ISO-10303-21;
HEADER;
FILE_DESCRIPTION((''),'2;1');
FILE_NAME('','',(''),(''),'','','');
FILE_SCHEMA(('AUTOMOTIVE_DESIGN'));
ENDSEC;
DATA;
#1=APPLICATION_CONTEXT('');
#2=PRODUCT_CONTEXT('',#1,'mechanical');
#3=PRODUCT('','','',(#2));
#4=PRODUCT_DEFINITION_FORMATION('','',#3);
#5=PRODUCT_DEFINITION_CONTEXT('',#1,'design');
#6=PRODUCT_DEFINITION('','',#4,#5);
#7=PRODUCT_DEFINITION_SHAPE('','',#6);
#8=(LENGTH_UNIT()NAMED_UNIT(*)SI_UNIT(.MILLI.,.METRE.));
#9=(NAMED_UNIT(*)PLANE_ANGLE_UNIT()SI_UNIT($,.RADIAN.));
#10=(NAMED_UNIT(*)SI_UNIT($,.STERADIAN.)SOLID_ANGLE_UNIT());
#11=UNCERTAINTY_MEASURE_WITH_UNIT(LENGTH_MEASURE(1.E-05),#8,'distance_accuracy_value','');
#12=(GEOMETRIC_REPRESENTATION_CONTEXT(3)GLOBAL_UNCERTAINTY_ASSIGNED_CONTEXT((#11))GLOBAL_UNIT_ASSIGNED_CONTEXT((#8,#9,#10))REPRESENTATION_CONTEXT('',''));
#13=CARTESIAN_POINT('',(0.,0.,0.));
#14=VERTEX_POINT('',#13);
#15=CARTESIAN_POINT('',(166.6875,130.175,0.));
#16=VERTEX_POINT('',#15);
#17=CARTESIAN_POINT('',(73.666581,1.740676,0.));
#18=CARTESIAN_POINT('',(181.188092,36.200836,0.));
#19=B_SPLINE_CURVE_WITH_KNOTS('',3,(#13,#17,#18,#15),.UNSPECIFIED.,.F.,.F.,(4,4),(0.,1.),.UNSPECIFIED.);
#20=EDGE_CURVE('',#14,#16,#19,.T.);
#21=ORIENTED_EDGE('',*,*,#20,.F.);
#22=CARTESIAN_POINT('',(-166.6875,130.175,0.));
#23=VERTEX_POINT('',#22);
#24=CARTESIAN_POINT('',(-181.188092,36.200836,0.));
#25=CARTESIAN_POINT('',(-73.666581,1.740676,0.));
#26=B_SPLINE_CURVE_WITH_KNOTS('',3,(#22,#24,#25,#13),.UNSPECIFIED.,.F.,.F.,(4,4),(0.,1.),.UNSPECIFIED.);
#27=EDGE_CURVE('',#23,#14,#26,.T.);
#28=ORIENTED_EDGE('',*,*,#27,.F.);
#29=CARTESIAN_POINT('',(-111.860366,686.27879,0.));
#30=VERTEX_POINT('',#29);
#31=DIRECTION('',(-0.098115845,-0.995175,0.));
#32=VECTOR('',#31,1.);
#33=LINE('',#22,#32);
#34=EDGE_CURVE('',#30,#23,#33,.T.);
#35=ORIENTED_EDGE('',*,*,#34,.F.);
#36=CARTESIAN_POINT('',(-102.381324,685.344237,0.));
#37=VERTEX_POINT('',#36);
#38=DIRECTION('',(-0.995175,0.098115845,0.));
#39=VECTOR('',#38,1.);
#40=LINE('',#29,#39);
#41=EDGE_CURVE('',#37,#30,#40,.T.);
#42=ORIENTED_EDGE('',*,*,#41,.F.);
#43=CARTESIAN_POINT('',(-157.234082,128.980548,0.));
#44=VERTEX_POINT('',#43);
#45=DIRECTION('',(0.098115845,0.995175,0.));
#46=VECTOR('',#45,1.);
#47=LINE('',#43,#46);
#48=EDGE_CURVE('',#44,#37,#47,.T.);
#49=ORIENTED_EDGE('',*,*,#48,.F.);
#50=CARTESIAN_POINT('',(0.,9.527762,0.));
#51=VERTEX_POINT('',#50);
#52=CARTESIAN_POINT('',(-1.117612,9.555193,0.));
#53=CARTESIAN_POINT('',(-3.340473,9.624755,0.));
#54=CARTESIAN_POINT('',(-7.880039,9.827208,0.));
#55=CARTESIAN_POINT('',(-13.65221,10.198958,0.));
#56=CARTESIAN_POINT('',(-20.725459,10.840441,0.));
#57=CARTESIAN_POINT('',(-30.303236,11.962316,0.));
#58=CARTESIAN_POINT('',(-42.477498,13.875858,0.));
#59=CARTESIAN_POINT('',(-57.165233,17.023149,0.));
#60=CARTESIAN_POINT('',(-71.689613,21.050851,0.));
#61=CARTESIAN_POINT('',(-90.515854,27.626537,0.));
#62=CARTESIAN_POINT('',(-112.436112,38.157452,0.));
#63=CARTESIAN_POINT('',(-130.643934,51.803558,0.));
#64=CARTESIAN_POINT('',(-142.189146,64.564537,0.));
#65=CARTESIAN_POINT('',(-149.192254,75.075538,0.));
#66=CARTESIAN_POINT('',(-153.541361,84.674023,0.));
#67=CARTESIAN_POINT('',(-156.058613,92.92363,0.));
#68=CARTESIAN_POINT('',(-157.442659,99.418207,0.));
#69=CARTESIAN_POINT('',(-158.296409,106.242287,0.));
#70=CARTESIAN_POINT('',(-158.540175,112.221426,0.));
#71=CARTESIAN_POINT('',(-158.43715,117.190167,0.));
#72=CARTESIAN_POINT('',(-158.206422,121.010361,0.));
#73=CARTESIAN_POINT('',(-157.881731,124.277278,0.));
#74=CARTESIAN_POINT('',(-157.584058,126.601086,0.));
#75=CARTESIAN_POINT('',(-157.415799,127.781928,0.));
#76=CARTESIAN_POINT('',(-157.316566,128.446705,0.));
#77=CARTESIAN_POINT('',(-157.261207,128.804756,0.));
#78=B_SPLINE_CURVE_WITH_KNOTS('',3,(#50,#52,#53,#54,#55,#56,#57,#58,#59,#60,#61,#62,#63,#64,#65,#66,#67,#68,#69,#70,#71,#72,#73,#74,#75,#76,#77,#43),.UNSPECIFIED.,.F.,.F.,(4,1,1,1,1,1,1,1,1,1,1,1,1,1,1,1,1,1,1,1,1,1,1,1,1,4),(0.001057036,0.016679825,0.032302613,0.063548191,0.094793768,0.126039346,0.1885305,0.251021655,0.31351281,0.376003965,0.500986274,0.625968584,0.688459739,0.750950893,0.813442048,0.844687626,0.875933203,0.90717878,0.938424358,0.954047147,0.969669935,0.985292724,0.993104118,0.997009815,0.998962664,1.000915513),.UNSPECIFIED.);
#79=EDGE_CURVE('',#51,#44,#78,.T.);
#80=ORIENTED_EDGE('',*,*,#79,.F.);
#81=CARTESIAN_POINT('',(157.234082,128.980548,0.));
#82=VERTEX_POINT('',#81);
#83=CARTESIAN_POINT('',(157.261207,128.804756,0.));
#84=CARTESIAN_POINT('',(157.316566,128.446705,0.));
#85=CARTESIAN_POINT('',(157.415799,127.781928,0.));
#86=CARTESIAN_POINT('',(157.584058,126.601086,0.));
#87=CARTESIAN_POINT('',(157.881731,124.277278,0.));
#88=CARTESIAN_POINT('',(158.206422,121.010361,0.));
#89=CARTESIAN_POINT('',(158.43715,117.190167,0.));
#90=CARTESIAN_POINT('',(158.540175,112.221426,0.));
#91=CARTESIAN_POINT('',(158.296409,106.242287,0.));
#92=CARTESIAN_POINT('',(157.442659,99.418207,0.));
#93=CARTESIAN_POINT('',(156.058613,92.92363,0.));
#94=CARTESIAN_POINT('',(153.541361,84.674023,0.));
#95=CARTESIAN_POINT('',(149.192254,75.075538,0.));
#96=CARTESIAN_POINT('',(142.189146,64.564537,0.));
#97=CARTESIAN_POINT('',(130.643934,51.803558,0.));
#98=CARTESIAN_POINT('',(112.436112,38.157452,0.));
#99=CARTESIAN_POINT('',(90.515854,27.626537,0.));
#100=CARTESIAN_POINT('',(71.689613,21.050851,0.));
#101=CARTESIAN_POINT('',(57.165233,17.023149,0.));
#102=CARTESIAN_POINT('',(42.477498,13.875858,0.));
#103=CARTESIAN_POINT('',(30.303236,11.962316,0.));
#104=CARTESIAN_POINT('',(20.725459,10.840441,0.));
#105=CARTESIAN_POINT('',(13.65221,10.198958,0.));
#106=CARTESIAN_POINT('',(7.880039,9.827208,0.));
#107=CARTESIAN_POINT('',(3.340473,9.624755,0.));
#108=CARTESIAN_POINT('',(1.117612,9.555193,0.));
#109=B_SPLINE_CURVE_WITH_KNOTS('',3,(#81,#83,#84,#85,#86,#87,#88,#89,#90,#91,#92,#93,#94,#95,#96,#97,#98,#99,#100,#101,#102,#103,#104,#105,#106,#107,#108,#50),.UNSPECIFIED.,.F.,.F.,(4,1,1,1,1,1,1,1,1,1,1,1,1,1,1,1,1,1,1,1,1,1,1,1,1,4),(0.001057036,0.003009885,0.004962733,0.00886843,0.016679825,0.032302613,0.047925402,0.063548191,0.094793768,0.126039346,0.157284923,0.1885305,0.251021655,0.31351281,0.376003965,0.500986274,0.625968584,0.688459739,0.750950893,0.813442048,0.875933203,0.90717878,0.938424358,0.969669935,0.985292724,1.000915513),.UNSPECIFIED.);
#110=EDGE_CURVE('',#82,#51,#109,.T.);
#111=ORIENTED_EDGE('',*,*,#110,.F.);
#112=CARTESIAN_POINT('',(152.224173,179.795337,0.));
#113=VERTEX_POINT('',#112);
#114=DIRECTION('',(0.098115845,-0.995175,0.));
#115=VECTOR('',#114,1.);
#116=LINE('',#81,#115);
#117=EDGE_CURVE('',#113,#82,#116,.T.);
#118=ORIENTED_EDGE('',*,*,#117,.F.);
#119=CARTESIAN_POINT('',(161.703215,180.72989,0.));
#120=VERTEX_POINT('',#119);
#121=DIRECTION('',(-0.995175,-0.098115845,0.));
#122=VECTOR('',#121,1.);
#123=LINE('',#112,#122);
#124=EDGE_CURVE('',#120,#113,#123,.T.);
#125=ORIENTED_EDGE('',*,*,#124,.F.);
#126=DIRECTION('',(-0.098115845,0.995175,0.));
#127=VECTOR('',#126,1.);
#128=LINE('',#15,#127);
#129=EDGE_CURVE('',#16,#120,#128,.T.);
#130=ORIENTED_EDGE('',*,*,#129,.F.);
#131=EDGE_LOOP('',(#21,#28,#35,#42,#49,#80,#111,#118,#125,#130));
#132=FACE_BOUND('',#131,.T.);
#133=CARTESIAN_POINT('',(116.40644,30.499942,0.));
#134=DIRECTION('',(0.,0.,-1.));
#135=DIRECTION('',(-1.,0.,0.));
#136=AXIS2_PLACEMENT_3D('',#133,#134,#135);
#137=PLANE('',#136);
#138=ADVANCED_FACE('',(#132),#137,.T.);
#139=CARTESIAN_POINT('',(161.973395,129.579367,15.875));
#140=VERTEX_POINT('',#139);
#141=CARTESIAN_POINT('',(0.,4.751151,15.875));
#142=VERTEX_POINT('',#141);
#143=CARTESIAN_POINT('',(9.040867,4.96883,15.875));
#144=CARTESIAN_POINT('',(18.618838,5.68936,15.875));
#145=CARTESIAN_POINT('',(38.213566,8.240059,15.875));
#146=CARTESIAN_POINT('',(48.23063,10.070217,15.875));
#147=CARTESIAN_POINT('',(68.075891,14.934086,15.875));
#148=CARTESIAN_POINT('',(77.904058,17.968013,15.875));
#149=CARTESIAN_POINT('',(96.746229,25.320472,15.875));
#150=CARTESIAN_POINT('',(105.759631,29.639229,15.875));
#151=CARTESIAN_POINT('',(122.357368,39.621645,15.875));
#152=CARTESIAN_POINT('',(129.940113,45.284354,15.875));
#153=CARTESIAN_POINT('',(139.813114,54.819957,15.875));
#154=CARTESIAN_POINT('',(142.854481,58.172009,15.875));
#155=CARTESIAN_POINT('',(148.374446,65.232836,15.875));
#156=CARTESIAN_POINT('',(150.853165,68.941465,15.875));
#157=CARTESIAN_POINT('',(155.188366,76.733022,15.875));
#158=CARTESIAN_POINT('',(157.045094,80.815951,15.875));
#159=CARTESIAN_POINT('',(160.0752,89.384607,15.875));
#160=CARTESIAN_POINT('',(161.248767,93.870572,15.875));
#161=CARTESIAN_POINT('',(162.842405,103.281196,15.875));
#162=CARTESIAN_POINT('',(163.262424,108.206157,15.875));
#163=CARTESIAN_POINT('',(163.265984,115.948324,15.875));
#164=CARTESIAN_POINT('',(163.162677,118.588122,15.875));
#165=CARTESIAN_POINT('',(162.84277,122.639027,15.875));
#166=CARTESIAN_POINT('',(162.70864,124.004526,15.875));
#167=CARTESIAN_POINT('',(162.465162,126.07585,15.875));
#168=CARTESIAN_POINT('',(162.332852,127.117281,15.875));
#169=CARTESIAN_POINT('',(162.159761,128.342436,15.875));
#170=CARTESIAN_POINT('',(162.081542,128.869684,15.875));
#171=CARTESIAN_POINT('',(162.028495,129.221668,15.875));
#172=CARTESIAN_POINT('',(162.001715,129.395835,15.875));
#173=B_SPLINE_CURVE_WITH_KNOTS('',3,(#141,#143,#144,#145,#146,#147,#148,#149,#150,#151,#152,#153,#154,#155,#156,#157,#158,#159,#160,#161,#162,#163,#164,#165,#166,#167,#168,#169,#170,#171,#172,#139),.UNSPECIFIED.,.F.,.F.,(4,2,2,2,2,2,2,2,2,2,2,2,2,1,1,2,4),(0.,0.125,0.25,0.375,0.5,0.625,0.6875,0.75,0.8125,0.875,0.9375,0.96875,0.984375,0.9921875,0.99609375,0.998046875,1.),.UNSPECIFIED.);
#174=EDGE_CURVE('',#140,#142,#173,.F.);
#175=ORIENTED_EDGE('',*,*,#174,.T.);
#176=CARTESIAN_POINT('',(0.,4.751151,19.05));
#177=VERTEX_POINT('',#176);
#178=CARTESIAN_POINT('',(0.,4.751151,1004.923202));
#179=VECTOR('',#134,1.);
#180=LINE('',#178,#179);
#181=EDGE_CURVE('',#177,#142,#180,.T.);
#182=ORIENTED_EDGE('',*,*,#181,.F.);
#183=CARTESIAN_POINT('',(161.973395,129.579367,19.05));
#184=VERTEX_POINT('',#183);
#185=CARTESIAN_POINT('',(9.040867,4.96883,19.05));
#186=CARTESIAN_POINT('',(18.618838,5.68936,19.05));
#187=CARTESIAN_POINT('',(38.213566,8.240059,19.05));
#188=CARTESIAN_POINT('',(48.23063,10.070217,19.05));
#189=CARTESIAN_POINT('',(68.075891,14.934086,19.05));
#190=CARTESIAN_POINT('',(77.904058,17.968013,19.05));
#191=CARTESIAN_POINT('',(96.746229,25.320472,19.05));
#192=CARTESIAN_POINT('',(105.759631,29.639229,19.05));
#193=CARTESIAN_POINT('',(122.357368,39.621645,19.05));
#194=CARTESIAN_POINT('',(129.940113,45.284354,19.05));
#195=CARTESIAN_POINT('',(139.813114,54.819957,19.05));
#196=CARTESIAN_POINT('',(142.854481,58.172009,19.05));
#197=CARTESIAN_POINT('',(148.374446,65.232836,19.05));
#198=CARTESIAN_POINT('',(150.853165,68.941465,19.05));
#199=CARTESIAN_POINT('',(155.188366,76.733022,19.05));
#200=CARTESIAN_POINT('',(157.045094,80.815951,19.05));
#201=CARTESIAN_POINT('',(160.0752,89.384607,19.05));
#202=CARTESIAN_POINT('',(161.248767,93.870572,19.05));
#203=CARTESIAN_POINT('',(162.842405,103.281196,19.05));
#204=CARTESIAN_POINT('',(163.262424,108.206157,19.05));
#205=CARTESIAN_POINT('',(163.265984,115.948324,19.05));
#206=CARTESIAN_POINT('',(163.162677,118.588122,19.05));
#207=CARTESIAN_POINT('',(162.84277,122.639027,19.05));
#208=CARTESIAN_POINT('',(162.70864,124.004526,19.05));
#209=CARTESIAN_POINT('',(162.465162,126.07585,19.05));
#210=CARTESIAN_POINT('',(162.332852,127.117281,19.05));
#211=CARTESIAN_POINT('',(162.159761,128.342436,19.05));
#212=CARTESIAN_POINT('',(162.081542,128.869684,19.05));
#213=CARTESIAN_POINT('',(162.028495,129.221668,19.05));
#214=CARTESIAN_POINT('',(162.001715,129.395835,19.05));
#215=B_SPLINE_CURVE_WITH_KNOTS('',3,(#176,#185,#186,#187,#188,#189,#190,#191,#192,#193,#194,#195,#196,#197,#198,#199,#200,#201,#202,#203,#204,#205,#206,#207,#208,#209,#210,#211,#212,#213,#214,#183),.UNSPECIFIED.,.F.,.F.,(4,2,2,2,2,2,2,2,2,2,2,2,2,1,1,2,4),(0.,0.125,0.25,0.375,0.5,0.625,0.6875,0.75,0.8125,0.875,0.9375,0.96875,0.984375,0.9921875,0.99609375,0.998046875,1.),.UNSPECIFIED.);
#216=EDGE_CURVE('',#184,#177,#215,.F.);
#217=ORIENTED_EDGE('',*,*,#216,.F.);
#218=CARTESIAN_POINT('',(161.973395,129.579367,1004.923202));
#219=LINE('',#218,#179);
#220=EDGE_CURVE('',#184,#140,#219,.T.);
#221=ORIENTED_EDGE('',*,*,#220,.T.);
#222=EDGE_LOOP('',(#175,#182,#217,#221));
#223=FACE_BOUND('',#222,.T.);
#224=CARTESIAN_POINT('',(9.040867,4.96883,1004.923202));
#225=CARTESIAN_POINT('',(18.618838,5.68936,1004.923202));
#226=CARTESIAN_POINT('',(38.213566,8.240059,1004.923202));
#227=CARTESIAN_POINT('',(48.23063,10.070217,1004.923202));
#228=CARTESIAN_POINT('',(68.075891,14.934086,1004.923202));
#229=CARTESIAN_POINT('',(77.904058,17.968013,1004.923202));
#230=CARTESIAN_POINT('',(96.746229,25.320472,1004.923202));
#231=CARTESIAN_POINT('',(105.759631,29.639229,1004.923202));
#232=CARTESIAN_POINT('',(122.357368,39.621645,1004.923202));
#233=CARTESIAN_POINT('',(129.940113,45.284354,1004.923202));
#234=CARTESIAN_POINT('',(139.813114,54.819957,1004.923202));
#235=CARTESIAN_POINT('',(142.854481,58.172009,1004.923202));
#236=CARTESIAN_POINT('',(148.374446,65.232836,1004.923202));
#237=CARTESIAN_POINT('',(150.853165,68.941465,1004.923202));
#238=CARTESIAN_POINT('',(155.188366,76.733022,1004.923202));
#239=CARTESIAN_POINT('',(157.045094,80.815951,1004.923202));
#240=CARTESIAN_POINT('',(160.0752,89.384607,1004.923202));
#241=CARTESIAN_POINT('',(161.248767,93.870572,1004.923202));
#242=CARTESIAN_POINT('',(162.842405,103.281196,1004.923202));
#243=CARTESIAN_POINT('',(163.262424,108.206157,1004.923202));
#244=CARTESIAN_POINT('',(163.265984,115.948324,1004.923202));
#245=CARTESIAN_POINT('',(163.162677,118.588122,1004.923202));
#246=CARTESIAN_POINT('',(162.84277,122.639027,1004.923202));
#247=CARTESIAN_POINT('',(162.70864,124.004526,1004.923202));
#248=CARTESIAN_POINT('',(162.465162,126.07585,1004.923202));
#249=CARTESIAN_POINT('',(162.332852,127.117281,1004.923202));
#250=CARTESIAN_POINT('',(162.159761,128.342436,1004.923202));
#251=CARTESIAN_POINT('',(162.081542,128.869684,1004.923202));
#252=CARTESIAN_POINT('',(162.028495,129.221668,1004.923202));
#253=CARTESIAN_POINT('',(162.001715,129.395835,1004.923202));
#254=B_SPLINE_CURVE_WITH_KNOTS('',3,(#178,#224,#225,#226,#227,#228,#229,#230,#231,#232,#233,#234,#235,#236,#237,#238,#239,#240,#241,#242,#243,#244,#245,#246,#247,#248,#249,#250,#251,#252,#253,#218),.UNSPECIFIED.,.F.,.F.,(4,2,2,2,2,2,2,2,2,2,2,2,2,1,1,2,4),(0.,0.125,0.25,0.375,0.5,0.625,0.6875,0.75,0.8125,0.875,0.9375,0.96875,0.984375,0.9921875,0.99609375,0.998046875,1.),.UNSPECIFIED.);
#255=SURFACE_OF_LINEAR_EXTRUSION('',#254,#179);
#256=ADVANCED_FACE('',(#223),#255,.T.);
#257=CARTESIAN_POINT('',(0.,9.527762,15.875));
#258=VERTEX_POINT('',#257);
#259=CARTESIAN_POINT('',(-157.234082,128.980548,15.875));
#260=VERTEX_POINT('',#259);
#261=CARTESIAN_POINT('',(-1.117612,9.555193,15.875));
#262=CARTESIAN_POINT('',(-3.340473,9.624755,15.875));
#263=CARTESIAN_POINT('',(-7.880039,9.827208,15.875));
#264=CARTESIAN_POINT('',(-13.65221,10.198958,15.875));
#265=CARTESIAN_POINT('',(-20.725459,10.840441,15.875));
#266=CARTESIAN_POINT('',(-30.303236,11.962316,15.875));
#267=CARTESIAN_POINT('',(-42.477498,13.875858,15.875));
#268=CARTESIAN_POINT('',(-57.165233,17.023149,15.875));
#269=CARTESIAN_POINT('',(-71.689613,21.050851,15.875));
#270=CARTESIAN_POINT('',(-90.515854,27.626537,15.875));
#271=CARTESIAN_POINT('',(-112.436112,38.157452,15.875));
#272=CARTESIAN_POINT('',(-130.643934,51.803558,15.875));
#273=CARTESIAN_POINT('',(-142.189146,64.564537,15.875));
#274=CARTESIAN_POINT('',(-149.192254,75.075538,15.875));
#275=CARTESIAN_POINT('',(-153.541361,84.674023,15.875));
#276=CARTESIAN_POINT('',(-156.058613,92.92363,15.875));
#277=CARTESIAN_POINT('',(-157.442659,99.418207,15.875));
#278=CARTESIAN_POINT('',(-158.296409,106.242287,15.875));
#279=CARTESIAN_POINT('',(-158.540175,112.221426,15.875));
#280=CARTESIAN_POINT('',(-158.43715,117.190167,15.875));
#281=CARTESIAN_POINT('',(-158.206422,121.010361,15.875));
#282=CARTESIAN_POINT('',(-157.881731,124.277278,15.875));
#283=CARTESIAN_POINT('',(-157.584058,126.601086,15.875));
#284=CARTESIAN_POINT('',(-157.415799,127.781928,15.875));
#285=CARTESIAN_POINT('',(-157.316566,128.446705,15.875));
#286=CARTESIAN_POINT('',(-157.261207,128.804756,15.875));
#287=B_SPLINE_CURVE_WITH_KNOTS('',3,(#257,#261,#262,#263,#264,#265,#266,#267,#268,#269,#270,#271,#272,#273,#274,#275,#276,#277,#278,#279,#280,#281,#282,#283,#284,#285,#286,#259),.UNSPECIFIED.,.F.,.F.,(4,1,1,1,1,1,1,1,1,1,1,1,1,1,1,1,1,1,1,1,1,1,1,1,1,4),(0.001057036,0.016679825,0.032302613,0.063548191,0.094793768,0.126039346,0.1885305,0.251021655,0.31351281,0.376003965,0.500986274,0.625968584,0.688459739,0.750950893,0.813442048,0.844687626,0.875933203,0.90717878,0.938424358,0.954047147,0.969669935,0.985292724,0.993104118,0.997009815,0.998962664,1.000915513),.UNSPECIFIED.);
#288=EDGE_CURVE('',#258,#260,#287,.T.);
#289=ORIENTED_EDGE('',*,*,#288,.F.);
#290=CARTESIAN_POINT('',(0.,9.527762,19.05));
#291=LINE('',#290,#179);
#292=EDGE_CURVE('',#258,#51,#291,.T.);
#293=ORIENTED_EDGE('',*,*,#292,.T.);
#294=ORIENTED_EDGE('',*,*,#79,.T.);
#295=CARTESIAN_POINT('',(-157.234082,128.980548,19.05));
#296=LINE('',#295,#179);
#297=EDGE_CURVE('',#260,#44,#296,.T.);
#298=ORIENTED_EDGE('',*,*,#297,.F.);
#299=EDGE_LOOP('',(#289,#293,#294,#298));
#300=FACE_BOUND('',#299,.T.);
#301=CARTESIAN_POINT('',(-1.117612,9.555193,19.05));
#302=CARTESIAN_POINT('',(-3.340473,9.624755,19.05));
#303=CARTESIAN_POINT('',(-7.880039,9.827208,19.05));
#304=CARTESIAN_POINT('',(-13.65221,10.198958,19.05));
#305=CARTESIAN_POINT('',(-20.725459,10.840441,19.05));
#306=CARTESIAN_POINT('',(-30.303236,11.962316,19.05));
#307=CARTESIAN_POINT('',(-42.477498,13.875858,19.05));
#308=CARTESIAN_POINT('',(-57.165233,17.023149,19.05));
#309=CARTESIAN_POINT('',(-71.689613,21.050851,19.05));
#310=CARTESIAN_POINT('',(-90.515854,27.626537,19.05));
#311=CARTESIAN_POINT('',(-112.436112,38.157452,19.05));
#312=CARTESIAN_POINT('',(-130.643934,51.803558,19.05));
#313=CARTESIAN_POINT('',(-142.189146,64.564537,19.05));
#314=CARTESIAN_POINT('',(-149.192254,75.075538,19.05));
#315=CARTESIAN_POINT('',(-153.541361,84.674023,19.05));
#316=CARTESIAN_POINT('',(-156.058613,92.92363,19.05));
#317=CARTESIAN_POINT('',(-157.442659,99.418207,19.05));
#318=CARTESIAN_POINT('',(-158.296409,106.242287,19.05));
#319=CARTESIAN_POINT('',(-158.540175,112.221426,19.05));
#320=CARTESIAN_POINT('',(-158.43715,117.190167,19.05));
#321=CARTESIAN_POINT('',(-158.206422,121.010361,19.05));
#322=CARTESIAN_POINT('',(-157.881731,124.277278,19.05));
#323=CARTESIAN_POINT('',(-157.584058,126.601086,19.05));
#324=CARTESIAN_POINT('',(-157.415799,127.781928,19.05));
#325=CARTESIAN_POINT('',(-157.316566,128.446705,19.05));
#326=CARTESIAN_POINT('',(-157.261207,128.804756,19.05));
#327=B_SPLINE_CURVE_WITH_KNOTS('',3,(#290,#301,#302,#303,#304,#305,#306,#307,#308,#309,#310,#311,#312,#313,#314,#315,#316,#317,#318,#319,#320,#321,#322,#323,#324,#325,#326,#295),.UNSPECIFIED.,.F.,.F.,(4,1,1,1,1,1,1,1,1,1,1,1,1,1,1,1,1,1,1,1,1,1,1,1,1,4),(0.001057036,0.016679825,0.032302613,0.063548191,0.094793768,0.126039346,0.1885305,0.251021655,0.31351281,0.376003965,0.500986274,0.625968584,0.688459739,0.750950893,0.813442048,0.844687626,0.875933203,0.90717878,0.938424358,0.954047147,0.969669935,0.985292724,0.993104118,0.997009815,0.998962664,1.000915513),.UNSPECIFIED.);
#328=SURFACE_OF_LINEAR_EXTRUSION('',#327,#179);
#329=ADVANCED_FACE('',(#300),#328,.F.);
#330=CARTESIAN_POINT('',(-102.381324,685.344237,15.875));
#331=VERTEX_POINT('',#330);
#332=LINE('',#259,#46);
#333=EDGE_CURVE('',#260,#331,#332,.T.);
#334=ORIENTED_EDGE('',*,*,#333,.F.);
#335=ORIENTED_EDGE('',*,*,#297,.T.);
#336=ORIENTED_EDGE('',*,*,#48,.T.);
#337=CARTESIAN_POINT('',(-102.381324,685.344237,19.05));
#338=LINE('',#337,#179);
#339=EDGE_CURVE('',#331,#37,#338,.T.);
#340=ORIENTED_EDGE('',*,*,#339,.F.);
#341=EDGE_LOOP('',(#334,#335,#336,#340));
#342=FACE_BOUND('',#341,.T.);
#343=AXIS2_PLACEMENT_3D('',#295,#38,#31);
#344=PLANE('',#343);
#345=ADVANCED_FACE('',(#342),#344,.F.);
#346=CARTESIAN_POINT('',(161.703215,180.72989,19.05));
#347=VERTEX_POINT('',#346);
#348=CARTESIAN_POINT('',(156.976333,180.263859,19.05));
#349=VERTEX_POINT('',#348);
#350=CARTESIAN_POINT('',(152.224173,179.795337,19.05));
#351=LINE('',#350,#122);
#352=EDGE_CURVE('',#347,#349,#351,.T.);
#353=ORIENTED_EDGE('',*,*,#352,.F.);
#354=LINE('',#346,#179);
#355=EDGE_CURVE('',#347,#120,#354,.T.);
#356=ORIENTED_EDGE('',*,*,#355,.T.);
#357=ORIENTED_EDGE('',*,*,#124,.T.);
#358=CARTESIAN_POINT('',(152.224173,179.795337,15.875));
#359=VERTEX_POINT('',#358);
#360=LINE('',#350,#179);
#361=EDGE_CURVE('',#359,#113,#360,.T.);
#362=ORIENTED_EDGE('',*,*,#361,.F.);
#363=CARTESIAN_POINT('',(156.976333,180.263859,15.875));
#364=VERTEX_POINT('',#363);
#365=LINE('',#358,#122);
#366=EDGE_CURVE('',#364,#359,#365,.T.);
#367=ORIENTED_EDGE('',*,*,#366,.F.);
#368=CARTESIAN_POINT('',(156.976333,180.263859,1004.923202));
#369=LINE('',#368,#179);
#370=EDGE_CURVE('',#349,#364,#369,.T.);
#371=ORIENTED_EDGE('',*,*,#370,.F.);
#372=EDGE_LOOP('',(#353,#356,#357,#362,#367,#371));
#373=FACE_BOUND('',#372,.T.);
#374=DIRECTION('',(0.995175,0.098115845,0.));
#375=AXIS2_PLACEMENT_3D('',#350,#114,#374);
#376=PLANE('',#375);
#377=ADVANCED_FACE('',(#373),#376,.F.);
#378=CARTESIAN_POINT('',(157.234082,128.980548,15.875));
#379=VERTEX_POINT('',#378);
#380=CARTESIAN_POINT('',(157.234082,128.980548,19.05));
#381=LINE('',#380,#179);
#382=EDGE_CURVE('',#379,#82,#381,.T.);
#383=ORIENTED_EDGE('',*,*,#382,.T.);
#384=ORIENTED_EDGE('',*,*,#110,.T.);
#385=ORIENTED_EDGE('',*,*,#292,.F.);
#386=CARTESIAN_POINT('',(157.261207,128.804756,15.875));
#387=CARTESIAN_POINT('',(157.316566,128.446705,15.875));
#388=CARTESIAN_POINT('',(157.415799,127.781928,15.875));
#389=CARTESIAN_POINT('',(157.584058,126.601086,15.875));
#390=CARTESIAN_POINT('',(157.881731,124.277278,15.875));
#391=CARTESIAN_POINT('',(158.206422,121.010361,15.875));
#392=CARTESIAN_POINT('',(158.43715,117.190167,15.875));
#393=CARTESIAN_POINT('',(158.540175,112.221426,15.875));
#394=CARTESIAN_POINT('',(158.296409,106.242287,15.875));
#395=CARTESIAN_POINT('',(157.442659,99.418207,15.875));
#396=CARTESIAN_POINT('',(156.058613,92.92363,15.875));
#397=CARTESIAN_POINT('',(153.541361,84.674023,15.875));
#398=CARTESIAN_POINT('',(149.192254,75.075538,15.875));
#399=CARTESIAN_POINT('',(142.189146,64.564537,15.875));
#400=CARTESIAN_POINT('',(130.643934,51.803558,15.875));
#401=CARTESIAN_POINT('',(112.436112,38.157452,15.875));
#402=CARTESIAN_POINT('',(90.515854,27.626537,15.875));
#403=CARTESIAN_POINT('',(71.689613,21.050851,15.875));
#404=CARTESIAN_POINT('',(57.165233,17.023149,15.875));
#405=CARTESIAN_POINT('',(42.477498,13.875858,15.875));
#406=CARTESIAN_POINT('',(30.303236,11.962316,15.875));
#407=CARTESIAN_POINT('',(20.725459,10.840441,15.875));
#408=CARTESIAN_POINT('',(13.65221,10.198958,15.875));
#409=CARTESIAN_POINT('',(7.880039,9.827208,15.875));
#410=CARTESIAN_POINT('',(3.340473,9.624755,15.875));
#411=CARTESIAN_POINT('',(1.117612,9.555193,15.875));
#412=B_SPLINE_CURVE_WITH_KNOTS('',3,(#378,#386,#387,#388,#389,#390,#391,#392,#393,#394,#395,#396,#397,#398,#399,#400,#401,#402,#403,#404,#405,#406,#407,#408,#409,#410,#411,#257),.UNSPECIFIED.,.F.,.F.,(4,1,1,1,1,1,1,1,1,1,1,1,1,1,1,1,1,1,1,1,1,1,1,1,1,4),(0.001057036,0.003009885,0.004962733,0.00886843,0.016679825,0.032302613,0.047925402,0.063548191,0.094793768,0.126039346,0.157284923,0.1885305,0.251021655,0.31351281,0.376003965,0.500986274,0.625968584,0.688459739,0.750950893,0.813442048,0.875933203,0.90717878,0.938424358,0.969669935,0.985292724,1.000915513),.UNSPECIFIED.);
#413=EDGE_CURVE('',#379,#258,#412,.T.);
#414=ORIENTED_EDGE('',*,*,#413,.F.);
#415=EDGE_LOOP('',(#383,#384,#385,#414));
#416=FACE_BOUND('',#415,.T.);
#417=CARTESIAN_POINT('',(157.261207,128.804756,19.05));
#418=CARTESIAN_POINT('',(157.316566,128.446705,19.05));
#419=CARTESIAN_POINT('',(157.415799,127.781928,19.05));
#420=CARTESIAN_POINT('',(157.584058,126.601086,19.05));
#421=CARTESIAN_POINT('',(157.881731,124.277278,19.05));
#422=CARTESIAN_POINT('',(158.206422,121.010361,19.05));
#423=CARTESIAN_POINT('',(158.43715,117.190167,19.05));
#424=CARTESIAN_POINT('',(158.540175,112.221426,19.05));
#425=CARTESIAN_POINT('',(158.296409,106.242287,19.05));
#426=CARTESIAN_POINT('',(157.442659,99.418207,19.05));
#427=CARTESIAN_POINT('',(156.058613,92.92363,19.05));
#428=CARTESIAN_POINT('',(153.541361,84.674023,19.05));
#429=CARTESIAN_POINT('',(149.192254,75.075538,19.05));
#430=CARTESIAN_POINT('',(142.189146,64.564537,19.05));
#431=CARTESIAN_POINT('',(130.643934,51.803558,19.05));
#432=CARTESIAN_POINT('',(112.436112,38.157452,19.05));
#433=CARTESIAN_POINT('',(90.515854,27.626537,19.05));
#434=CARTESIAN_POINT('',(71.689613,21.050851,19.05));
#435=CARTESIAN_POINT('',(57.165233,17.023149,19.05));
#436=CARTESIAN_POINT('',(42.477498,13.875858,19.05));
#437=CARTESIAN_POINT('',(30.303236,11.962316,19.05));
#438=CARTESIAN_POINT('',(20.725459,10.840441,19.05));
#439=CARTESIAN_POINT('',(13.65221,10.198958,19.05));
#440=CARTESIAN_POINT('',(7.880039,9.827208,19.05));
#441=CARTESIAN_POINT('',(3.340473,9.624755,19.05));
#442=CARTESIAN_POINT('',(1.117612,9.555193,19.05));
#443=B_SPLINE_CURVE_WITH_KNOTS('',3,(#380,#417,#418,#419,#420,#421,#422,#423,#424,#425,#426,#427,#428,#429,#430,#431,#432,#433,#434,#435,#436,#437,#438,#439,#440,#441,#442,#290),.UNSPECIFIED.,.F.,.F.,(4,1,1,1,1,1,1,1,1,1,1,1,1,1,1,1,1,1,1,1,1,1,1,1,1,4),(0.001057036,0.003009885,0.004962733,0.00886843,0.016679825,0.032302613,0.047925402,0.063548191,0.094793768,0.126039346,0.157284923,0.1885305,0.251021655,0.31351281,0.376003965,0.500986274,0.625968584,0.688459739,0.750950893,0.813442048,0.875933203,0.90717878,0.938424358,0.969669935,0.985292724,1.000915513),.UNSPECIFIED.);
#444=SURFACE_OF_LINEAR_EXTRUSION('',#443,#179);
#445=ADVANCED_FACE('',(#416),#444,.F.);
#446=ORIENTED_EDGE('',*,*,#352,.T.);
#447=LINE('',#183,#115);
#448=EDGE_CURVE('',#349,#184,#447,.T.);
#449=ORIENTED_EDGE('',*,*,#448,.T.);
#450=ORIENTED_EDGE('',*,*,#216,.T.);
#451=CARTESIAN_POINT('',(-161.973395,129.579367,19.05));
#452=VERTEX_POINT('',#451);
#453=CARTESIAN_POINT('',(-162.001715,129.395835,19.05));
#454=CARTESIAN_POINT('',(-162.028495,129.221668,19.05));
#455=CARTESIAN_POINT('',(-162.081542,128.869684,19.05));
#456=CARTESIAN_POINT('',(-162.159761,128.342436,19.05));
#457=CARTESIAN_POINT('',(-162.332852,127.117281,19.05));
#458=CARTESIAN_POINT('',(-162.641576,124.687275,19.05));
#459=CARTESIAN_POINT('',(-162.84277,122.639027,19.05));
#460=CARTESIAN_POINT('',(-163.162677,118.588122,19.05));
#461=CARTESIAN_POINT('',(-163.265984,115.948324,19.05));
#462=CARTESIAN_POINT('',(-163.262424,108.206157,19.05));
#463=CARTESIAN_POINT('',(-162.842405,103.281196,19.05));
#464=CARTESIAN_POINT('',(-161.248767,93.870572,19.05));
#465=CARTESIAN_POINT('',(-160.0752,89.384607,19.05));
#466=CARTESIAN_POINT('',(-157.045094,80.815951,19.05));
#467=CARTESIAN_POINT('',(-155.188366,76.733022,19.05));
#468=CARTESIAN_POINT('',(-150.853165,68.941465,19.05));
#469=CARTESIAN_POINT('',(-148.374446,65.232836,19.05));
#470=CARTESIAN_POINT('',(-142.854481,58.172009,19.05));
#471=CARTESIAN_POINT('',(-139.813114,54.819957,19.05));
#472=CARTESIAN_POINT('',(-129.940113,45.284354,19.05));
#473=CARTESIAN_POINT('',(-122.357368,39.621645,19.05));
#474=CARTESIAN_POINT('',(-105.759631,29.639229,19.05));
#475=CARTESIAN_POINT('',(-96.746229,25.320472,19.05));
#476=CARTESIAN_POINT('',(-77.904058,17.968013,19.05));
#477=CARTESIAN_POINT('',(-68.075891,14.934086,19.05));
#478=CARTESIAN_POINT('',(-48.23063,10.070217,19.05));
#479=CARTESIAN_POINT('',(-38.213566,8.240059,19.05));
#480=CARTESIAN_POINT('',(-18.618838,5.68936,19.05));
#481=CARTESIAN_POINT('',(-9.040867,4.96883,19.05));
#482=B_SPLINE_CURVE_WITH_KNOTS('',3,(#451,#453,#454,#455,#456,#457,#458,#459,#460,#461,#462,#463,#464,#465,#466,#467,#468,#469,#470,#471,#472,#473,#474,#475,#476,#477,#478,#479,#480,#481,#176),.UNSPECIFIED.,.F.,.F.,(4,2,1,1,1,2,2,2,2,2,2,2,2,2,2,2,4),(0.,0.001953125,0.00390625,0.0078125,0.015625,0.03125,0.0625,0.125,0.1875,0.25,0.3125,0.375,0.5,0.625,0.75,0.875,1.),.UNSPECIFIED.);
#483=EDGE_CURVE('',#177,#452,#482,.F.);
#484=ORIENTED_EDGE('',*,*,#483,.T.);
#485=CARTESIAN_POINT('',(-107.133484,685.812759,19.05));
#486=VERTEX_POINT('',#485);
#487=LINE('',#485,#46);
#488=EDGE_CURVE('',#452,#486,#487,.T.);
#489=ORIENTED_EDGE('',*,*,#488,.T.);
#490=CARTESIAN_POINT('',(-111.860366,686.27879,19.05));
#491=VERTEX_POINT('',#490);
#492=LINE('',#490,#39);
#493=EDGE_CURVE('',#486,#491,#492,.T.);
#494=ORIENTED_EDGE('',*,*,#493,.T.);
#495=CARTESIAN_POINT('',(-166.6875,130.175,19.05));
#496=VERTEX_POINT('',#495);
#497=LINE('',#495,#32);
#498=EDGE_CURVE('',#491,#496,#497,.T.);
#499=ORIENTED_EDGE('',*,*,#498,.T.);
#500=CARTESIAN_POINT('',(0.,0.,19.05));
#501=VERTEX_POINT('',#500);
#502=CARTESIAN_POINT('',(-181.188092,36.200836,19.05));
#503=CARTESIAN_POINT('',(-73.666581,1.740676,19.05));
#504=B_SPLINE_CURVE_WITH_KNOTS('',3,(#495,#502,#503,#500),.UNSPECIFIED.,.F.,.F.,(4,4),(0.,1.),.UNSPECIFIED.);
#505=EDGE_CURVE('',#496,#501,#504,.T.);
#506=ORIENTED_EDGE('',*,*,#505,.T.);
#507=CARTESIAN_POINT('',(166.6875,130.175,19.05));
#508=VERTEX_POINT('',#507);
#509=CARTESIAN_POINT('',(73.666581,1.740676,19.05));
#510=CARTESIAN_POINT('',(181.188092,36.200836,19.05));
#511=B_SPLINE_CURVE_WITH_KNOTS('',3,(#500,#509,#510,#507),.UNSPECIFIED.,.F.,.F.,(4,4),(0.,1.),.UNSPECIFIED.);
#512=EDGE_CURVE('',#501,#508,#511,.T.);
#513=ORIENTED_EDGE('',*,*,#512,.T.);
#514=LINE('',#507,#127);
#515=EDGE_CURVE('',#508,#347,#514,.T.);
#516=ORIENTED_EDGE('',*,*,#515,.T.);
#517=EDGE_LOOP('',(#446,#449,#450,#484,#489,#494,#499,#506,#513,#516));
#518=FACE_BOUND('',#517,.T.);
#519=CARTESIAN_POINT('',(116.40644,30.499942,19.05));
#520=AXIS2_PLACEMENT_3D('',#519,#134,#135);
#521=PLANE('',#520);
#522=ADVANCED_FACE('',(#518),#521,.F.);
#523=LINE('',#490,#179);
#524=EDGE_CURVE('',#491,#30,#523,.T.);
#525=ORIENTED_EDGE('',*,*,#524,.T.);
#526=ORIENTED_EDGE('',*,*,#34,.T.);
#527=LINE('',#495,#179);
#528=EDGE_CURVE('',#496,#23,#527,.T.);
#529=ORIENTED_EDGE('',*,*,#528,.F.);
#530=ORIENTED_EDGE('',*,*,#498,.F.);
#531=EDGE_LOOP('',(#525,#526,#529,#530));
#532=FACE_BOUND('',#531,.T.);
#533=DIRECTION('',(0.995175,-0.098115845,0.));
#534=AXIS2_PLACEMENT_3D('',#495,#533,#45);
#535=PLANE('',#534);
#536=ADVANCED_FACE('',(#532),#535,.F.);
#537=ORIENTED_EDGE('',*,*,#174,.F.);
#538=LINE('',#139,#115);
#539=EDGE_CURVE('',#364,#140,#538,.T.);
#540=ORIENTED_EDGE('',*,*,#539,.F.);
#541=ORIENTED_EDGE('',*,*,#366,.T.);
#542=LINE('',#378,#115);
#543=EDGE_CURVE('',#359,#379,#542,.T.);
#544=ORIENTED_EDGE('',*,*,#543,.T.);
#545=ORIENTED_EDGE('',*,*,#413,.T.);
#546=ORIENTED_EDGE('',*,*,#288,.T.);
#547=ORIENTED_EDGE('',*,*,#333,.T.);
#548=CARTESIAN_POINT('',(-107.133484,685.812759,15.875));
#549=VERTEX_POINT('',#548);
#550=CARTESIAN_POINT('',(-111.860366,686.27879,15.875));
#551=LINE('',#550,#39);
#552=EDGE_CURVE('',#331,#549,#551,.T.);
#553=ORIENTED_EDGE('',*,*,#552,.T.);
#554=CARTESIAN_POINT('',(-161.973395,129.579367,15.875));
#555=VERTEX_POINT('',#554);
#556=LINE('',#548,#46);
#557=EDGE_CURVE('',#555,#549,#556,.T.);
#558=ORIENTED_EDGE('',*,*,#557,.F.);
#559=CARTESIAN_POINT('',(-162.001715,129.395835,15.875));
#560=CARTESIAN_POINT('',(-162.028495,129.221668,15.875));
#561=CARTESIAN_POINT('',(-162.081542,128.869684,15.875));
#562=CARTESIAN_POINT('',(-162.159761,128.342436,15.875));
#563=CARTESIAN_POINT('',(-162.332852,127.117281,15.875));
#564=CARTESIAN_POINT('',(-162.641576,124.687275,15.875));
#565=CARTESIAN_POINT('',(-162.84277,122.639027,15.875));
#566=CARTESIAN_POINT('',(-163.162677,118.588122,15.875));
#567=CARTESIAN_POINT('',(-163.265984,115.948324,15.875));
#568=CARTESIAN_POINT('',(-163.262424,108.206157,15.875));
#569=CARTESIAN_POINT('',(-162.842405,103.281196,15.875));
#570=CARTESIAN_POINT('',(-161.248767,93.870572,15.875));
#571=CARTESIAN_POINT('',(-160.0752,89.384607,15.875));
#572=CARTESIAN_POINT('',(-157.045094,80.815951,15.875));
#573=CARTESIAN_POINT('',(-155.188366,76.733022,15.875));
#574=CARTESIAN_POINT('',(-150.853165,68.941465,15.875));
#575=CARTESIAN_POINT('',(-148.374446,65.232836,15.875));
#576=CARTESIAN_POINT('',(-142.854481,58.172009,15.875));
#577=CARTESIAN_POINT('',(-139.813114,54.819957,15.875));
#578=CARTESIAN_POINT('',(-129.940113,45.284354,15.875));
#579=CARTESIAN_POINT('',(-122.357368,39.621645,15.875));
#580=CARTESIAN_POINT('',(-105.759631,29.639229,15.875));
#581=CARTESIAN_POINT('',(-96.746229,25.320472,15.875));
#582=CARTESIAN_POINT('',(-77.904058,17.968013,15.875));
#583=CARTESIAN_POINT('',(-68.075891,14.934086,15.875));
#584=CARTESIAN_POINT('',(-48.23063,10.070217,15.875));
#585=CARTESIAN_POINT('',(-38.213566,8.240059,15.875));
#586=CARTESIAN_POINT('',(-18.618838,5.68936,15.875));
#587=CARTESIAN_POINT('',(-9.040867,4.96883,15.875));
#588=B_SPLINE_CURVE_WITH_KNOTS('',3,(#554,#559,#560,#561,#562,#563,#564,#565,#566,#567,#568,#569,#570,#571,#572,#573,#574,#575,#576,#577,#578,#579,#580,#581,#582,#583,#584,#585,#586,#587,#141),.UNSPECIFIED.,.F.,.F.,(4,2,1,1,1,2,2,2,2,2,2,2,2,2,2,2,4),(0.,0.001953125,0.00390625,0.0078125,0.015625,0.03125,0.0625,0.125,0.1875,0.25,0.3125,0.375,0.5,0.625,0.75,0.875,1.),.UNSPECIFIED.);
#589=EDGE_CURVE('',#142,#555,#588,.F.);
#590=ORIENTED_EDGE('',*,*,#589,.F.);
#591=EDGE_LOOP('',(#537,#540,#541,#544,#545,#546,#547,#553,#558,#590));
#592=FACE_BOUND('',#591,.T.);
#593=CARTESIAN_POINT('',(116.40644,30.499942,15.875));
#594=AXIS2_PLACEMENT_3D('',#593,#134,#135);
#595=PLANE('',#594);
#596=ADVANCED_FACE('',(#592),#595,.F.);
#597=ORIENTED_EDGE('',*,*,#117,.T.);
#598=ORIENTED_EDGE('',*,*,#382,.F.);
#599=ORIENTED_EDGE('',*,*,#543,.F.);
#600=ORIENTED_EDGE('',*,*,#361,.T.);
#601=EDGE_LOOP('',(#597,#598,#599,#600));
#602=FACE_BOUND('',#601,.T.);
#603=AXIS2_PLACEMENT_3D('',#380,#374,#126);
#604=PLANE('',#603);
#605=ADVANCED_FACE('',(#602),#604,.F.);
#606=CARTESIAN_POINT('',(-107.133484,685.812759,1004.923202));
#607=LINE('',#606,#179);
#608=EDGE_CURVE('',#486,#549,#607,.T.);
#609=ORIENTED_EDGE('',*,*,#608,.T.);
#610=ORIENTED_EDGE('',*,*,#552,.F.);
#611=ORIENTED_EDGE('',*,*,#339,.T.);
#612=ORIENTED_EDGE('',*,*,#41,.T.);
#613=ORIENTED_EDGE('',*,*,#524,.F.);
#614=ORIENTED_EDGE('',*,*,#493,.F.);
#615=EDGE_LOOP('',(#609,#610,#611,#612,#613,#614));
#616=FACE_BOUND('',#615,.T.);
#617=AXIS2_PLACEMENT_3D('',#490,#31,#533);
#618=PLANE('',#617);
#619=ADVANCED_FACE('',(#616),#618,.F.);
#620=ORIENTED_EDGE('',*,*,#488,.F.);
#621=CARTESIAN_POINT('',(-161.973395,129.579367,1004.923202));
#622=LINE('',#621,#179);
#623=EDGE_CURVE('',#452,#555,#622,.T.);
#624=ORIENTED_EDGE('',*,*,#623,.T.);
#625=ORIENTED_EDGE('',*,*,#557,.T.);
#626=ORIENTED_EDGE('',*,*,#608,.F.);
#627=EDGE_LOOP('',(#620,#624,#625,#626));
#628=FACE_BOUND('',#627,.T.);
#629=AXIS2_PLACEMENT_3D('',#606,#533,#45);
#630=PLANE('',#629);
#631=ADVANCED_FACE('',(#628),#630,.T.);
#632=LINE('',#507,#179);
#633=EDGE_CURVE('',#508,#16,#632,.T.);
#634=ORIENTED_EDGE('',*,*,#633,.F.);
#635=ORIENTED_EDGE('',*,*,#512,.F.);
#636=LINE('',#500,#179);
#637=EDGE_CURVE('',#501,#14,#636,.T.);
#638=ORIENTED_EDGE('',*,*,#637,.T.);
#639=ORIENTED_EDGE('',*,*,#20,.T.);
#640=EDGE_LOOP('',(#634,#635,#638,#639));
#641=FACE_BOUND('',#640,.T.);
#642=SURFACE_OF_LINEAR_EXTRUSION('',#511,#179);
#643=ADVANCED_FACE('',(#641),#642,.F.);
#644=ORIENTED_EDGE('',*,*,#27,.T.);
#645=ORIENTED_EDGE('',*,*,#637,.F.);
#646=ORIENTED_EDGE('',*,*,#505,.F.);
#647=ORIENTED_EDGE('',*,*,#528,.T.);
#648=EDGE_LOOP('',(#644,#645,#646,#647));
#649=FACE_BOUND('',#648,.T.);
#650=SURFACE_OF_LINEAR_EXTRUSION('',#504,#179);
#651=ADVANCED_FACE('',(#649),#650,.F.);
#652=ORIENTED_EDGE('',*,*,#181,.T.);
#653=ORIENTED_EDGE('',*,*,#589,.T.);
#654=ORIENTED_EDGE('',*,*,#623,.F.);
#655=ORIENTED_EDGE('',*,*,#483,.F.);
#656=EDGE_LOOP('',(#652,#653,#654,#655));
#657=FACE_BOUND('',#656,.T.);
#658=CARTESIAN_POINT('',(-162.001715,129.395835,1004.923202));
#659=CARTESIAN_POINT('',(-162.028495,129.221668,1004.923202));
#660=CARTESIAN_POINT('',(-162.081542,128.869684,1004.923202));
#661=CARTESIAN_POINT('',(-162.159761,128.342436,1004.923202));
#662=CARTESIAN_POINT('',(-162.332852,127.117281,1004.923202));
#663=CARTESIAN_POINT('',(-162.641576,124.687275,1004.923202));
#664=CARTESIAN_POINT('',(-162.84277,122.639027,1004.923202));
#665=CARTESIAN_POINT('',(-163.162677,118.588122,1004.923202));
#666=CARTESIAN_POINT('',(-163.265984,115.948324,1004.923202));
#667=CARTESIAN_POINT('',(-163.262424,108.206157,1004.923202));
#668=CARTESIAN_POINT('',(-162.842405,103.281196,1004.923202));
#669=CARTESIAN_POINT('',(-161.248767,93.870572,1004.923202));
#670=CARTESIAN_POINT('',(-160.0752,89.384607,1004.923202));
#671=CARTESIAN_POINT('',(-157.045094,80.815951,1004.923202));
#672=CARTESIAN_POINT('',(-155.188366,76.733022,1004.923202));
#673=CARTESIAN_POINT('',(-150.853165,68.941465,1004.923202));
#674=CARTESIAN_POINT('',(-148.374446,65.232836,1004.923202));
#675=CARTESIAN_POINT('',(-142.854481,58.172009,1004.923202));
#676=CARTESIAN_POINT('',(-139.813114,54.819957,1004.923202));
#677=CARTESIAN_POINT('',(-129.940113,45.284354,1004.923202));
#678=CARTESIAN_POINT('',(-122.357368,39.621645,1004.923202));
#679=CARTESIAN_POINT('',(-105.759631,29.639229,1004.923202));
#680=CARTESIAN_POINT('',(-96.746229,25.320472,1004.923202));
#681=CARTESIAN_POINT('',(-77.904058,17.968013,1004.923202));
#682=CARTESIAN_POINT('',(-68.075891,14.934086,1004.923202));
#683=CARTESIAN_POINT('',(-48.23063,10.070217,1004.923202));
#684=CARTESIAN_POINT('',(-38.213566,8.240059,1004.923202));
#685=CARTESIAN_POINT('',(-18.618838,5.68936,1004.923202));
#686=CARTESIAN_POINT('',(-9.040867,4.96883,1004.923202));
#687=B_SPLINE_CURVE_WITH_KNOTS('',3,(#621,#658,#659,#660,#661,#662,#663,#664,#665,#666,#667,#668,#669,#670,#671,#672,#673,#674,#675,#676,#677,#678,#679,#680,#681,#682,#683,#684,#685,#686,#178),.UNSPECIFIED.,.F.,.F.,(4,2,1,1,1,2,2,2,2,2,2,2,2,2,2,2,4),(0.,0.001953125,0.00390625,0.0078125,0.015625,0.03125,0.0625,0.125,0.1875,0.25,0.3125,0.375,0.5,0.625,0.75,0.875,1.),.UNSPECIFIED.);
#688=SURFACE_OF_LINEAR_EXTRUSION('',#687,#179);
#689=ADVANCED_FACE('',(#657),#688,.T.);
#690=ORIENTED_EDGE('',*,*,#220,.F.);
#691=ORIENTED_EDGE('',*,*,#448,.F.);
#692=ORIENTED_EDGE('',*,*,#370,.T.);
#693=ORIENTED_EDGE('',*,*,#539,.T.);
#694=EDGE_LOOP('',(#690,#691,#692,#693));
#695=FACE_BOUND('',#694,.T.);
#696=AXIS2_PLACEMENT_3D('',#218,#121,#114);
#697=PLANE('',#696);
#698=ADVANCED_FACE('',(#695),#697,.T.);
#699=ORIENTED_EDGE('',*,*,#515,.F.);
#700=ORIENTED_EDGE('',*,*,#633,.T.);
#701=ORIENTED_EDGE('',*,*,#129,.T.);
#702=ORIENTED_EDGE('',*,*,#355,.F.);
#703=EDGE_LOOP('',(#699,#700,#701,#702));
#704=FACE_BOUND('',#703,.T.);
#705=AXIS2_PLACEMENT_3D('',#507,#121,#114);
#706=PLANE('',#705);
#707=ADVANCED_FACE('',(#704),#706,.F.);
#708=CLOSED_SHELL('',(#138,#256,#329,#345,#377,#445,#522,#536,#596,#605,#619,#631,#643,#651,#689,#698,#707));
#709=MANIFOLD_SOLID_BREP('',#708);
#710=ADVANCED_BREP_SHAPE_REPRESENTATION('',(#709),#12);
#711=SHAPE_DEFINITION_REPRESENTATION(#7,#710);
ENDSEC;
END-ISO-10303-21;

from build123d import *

# Parameters (mm, degrees)
BOSS_EXTRUDE1_DEPTH = 19.05
CUT_EXTRUDE1_START  = -3.175
CUT_EXTRUDE1_DEPTH  = 3.175


# Read off the part's stored shape, not the designer's step: Cut-Extrude1
with BuildPart() as part:
    # Sketch1 → Boss-Extrude1 (new body)
    with BuildSketch(Plane.XY):
        with BuildLine():
            Line((157.234081882, 128.980548454), (152.224173193, 179.795336584))
            Line((152.224173193, 179.795336584), (161.70321507, 180.729890008))
            Line((161.70321507, 180.729890008), (166.6875, 130.175))
            add(Edge.make_bspline(
                [(0, 0), (73.666580622, 1.740675992), (181.188092361, 36.200835609), (166.6875, 130.175)],
                knots=[0, 0, 0, 0, 1, 1, 1, 1], degree=3))
            add(Edge.make_bspline(
                [(0, 0), (-73.666580622, 1.740675992), (-181.188092361, 36.200835609), (-166.6875, 130.175)],
                knots=[0, 0, 0, 0, 1, 1, 1, 1], degree=3))
            Line((-166.6875, 130.175), (-111.860365766, 686.278790089))
            Line((-111.860365766, 686.278790089), (-102.381323889, 685.344236665))
            Line((-102.381323889, 685.344236665), (-157.234081882, 128.980548454))
            add(Edge.make_bspline(
                [(0, 9.52776174), (-1.117611602, 9.555193192), (-3.340472897, 9.624755056), (-7.880039481, 9.827207732), (-13.652210416, 10.198958437), (-20.725459036, 10.840441372), (-30.303235723, 11.962316267), (-42.47749757, 13.875858033), (-57.165232888, 17.02314898), (-71.689613059, 21.050850851), (-90.515854195, 27.626537064), (-112.436111514, 38.157452487), (-130.643933928, 51.803557723), (-142.189146149, 64.564536934), (-149.192253507, 75.075537554), (-153.541361304, 84.674022673), (-156.058613173, 92.923629982), (-157.442658539, 99.418206789), (-158.29640922, 106.242287005), (-158.540175044, 112.221426054), (-158.437150466, 117.190167219), (-158.20642164, 121.010360535), (-157.881730698, 124.277278241), (-157.584058118, 126.601085874), (-157.415798733, 127.781927866), (-157.316566229, 128.446705395), (-157.261207353, 128.804756083), (-157.234081882, 128.980548454)],
                knots=[0.001057036, 0.001057036, 0.001057036, 0.001057036, 0.016679825, 0.032302613, 0.063548191, 0.094793768, 0.126039346, 0.1885305, 0.251021655, 0.31351281, 0.376003965, 0.500986274, 0.625968584, 0.688459739, 0.750950893, 0.813442048, 0.844687626, 0.875933203, 0.90717878, 0.938424358, 0.954047147, 0.969669935, 0.985292724, 0.993104118, 0.997009815, 0.998962664, 1.000915513, 1.000915513, 1.000915513, 1.000915513], degree=3))
            add(Edge.make_bspline(
                [(157.234081882, 128.980548454), (157.261207353, 128.804756083), (157.316566229, 128.446705395), (157.415798733, 127.781927866), (157.584058118, 126.601085874), (157.881730698, 124.277278241), (158.20642164, 121.010360535), (158.437150466, 117.190167219), (158.540175044, 112.221426054), (158.29640922, 106.242287005), (157.442658539, 99.418206789), (156.058613173, 92.923629982), (153.541361304, 84.674022673), (149.192253507, 75.075537554), (142.189146149, 64.564536934), (130.643933928, 51.803557723), (112.436111514, 38.157452487), (90.515854195, 27.626537064), (71.689613059, 21.050850851), (57.165232888, 17.02314898), (42.47749757, 13.875858033), (30.303235723, 11.962316267), (20.725459036, 10.840441372), (13.652210416, 10.198958437), (7.880039481, 9.827207732), (3.340472897, 9.624755056), (1.117611602, 9.555193192), (0, 9.52776174)],
                knots=[0.001057036, 0.001057036, 0.001057036, 0.001057036, 0.003009885, 0.004962733, 0.00886843, 0.016679825, 0.032302613, 0.047925402, 0.063548191, 0.094793768, 0.126039346, 0.157284923, 0.1885305, 0.251021655, 0.31351281, 0.376003965, 0.500986274, 0.625968584, 0.688459739, 0.750950893, 0.813442048, 0.875933203, 0.90717878, 0.938424358, 0.969669935, 0.985292724, 1.000915513, 1.000915513, 1.000915513, 1.000915513], degree=3))
        make_face()
    extrude(amount=BOSS_EXTRUDE1_DEPTH)

    # Cut-Extrude1 outline → Cut-Extrude1 (cut)
    with BuildSketch(Plane.XY.offset(19.05).offset(CUT_EXTRUDE1_START)):
        with BuildLine():
            Line((-107.13348355, 685.812759448), (-161.973395498, 129.579366829))
            add(Edge.make_bspline(
                [(-161.973395498, 129.579366829), (-162.00171525, 129.395834674), (-162.028495082, 129.221667618), (-162.081541528, 128.869683844), (-162.159761136, 128.342436218), (-162.332851825, 127.117281326), (-162.641575692, 124.687275119), (-162.842770083, 122.639027203), (-163.16267738, 118.588121623), (-163.265984358, 115.948323615), (-163.262423556, 108.206156668), (-162.842404671, 103.28119599), (-161.248767489, 93.87057237), (-160.075199693, 89.384607046), (-157.045094148, 80.81595139), (-155.188366146, 76.733021658), (-150.853165213, 68.941465452), (-148.374445898, 65.232835538), (-142.854480948, 58.172008914), (-139.813114246, 54.819957421), (-129.940113205, 45.284353516), (-122.357367523, 39.621644841), (-105.759630554, 29.639229241), (-96.746229237, 25.320471564), (-77.904058281, 17.968013466), (-68.075890669, 14.934086027), (-48.230630184, 10.070216513), (-38.213566045, 8.240058869), (-18.618837768, 5.689359978), (-9.040867048, 4.96882986), (0, 4.751150948)],
                knots=[0, 0, 0, 0, 0.001953125, 0.001953125, 0.00390625, 0.0078125, 0.015625, 0.03125, 0.03125, 0.0625, 0.0625, 0.125, 0.125, 0.1875, 0.1875, 0.25, 0.25, 0.3125, 0.3125, 0.375, 0.375, 0.5, 0.5, 0.625, 0.625, 0.75, 0.75, 0.875, 0.875, 1, 1, 1, 1], degree=3))
            add(Edge.make_bspline(
                [(0, 4.751150948), (9.040867048, 4.96882986), (18.618837768, 5.689359978), (38.213566045, 8.240058869), (48.230630184, 10.070216513), (68.075890669, 14.934086027), (77.904058281, 17.968013466), (96.746229237, 25.320471564), (105.759630554, 29.639229241), (122.357367523, 39.621644841), (129.940113205, 45.284353516), (139.813114246, 54.819957421), (142.854480948, 58.172008914), (148.374445898, 65.232835538), (150.853165213, 68.941465452), (155.188366146, 76.733021658), (157.045094148, 80.81595139), (160.075199693, 89.384607046), (161.248767489, 93.87057237), (162.842404671, 103.28119599), (163.262423556, 108.206156668), (163.265984358, 115.948323615), (163.16267738, 118.588121623), (162.842770083, 122.639027203), (162.708640489, 124.004525814), (162.465162127, 126.075850353), (162.332851825, 127.117281326), (162.159761136, 128.342436218), (162.081541528, 128.869683844), (162.028495082, 129.221667618), (162.00171525, 129.395834674), (161.973395498, 129.579366829)],
                knots=[0, 0, 0, 0, 0.125, 0.125, 0.25, 0.25, 0.375, 0.375, 0.5, 0.5, 0.625, 0.625, 0.6875, 0.6875, 0.75, 0.75, 0.8125, 0.8125, 0.875, 0.875, 0.9375, 0.9375, 0.96875, 0.96875, 0.984375, 0.984375, 0.9921875, 0.99609375, 0.998046875, 0.998046875, 1, 1, 1, 1], degree=3))
            Line((161.973395498, 129.579366829), (156.976332854, 180.263859367))
            Line((156.976332854, 180.263859367), (152.224173193, 179.795336584))
            Line((152.224173193, 179.795336584), (157.234081882, 128.980548454))
            add(Edge.make_bspline(
                [(157.234081882, 128.980548454), (157.261207353, 128.804756083), (157.316566229, 128.446705395), (157.415798733, 127.781927866), (157.584058118, 126.601085874), (157.881730698, 124.277278241), (158.20642164, 121.010360535), (158.437150466, 117.190167219), (158.540175044, 112.221426054), (158.29640922, 106.242287005), (157.442658539, 99.418206789), (156.058613173, 92.923629982), (153.541361304, 84.674022673), (149.192253507, 75.075537554), (142.189146149, 64.564536934), (130.643933928, 51.803557723), (112.436111514, 38.157452487), (90.515854195, 27.626537064), (71.689613059, 21.050850851), (57.165232888, 17.02314898), (42.47749757, 13.875858033), (30.303235723, 11.962316267), (20.725459036, 10.840441372), (13.652210416, 10.198958437), (7.880039481, 9.827207732), (3.340472897, 9.624755056), (1.117611602, 9.555193192), (0, 9.52776174)],
                knots=[0.001057036, 0.001057036, 0.001057036, 0.001057036, 0.003009885, 0.004962733, 0.00886843, 0.016679825, 0.032302613, 0.047925402, 0.063548191, 0.094793768, 0.126039346, 0.157284923, 0.1885305, 0.251021655, 0.31351281, 0.376003965, 0.500986274, 0.625968584, 0.688459739, 0.750950893, 0.813442048, 0.875933203, 0.90717878, 0.938424358, 0.969669935, 0.985292724, 1.000915513, 1.000915513, 1.000915513, 1.000915513], degree=3))
            add(Edge.make_bspline(
                [(0, 9.52776174), (-1.117611602, 9.555193192), (-3.340472897, 9.624755056), (-7.880039481, 9.827207732), (-13.652210416, 10.198958437), (-20.725459036, 10.840441372), (-30.303235723, 11.962316267), (-42.47749757, 13.875858033), (-57.165232888, 17.02314898), (-71.689613059, 21.050850851), (-90.515854195, 27.626537064), (-112.436111514, 38.157452487), (-130.643933928, 51.803557723), (-142.189146149, 64.564536934), (-149.192253507, 75.075537554), (-153.541361304, 84.674022673), (-156.058613173, 92.923629982), (-157.442658539, 99.418206789), (-158.29640922, 106.242287005), (-158.540175044, 112.221426054), (-158.437150466, 117.190167219), (-158.20642164, 121.010360535), (-157.881730698, 124.277278241), (-157.584058118, 126.601085874), (-157.415798733, 127.781927866), (-157.316566229, 128.446705395), (-157.261207353, 128.804756083), (-157.234081882, 128.980548454)],
                knots=[0.001057036, 0.001057036, 0.001057036, 0.001057036, 0.016679825, 0.032302613, 0.063548191, 0.094793768, 0.126039346, 0.1885305, 0.251021655, 0.31351281, 0.376003965, 0.500986274, 0.625968584, 0.688459739, 0.750950893, 0.813442048, 0.844687626, 0.875933203, 0.90717878, 0.938424358, 0.954047147, 0.969669935, 0.985292724, 0.993104118, 0.997009815, 0.998962664, 1.000915513, 1.000915513, 1.000915513, 1.000915513], degree=3))
            Line((-157.234081882, 128.980548454), (-102.381323889, 685.344236665))
            Line((-102.381323889, 685.344236665), (-107.13348355, 685.812759448))
        make_face()
    extrude(amount=CUT_EXTRUDE1_DEPTH, mode=Mode.SUBTRACT)


solid = part.part
